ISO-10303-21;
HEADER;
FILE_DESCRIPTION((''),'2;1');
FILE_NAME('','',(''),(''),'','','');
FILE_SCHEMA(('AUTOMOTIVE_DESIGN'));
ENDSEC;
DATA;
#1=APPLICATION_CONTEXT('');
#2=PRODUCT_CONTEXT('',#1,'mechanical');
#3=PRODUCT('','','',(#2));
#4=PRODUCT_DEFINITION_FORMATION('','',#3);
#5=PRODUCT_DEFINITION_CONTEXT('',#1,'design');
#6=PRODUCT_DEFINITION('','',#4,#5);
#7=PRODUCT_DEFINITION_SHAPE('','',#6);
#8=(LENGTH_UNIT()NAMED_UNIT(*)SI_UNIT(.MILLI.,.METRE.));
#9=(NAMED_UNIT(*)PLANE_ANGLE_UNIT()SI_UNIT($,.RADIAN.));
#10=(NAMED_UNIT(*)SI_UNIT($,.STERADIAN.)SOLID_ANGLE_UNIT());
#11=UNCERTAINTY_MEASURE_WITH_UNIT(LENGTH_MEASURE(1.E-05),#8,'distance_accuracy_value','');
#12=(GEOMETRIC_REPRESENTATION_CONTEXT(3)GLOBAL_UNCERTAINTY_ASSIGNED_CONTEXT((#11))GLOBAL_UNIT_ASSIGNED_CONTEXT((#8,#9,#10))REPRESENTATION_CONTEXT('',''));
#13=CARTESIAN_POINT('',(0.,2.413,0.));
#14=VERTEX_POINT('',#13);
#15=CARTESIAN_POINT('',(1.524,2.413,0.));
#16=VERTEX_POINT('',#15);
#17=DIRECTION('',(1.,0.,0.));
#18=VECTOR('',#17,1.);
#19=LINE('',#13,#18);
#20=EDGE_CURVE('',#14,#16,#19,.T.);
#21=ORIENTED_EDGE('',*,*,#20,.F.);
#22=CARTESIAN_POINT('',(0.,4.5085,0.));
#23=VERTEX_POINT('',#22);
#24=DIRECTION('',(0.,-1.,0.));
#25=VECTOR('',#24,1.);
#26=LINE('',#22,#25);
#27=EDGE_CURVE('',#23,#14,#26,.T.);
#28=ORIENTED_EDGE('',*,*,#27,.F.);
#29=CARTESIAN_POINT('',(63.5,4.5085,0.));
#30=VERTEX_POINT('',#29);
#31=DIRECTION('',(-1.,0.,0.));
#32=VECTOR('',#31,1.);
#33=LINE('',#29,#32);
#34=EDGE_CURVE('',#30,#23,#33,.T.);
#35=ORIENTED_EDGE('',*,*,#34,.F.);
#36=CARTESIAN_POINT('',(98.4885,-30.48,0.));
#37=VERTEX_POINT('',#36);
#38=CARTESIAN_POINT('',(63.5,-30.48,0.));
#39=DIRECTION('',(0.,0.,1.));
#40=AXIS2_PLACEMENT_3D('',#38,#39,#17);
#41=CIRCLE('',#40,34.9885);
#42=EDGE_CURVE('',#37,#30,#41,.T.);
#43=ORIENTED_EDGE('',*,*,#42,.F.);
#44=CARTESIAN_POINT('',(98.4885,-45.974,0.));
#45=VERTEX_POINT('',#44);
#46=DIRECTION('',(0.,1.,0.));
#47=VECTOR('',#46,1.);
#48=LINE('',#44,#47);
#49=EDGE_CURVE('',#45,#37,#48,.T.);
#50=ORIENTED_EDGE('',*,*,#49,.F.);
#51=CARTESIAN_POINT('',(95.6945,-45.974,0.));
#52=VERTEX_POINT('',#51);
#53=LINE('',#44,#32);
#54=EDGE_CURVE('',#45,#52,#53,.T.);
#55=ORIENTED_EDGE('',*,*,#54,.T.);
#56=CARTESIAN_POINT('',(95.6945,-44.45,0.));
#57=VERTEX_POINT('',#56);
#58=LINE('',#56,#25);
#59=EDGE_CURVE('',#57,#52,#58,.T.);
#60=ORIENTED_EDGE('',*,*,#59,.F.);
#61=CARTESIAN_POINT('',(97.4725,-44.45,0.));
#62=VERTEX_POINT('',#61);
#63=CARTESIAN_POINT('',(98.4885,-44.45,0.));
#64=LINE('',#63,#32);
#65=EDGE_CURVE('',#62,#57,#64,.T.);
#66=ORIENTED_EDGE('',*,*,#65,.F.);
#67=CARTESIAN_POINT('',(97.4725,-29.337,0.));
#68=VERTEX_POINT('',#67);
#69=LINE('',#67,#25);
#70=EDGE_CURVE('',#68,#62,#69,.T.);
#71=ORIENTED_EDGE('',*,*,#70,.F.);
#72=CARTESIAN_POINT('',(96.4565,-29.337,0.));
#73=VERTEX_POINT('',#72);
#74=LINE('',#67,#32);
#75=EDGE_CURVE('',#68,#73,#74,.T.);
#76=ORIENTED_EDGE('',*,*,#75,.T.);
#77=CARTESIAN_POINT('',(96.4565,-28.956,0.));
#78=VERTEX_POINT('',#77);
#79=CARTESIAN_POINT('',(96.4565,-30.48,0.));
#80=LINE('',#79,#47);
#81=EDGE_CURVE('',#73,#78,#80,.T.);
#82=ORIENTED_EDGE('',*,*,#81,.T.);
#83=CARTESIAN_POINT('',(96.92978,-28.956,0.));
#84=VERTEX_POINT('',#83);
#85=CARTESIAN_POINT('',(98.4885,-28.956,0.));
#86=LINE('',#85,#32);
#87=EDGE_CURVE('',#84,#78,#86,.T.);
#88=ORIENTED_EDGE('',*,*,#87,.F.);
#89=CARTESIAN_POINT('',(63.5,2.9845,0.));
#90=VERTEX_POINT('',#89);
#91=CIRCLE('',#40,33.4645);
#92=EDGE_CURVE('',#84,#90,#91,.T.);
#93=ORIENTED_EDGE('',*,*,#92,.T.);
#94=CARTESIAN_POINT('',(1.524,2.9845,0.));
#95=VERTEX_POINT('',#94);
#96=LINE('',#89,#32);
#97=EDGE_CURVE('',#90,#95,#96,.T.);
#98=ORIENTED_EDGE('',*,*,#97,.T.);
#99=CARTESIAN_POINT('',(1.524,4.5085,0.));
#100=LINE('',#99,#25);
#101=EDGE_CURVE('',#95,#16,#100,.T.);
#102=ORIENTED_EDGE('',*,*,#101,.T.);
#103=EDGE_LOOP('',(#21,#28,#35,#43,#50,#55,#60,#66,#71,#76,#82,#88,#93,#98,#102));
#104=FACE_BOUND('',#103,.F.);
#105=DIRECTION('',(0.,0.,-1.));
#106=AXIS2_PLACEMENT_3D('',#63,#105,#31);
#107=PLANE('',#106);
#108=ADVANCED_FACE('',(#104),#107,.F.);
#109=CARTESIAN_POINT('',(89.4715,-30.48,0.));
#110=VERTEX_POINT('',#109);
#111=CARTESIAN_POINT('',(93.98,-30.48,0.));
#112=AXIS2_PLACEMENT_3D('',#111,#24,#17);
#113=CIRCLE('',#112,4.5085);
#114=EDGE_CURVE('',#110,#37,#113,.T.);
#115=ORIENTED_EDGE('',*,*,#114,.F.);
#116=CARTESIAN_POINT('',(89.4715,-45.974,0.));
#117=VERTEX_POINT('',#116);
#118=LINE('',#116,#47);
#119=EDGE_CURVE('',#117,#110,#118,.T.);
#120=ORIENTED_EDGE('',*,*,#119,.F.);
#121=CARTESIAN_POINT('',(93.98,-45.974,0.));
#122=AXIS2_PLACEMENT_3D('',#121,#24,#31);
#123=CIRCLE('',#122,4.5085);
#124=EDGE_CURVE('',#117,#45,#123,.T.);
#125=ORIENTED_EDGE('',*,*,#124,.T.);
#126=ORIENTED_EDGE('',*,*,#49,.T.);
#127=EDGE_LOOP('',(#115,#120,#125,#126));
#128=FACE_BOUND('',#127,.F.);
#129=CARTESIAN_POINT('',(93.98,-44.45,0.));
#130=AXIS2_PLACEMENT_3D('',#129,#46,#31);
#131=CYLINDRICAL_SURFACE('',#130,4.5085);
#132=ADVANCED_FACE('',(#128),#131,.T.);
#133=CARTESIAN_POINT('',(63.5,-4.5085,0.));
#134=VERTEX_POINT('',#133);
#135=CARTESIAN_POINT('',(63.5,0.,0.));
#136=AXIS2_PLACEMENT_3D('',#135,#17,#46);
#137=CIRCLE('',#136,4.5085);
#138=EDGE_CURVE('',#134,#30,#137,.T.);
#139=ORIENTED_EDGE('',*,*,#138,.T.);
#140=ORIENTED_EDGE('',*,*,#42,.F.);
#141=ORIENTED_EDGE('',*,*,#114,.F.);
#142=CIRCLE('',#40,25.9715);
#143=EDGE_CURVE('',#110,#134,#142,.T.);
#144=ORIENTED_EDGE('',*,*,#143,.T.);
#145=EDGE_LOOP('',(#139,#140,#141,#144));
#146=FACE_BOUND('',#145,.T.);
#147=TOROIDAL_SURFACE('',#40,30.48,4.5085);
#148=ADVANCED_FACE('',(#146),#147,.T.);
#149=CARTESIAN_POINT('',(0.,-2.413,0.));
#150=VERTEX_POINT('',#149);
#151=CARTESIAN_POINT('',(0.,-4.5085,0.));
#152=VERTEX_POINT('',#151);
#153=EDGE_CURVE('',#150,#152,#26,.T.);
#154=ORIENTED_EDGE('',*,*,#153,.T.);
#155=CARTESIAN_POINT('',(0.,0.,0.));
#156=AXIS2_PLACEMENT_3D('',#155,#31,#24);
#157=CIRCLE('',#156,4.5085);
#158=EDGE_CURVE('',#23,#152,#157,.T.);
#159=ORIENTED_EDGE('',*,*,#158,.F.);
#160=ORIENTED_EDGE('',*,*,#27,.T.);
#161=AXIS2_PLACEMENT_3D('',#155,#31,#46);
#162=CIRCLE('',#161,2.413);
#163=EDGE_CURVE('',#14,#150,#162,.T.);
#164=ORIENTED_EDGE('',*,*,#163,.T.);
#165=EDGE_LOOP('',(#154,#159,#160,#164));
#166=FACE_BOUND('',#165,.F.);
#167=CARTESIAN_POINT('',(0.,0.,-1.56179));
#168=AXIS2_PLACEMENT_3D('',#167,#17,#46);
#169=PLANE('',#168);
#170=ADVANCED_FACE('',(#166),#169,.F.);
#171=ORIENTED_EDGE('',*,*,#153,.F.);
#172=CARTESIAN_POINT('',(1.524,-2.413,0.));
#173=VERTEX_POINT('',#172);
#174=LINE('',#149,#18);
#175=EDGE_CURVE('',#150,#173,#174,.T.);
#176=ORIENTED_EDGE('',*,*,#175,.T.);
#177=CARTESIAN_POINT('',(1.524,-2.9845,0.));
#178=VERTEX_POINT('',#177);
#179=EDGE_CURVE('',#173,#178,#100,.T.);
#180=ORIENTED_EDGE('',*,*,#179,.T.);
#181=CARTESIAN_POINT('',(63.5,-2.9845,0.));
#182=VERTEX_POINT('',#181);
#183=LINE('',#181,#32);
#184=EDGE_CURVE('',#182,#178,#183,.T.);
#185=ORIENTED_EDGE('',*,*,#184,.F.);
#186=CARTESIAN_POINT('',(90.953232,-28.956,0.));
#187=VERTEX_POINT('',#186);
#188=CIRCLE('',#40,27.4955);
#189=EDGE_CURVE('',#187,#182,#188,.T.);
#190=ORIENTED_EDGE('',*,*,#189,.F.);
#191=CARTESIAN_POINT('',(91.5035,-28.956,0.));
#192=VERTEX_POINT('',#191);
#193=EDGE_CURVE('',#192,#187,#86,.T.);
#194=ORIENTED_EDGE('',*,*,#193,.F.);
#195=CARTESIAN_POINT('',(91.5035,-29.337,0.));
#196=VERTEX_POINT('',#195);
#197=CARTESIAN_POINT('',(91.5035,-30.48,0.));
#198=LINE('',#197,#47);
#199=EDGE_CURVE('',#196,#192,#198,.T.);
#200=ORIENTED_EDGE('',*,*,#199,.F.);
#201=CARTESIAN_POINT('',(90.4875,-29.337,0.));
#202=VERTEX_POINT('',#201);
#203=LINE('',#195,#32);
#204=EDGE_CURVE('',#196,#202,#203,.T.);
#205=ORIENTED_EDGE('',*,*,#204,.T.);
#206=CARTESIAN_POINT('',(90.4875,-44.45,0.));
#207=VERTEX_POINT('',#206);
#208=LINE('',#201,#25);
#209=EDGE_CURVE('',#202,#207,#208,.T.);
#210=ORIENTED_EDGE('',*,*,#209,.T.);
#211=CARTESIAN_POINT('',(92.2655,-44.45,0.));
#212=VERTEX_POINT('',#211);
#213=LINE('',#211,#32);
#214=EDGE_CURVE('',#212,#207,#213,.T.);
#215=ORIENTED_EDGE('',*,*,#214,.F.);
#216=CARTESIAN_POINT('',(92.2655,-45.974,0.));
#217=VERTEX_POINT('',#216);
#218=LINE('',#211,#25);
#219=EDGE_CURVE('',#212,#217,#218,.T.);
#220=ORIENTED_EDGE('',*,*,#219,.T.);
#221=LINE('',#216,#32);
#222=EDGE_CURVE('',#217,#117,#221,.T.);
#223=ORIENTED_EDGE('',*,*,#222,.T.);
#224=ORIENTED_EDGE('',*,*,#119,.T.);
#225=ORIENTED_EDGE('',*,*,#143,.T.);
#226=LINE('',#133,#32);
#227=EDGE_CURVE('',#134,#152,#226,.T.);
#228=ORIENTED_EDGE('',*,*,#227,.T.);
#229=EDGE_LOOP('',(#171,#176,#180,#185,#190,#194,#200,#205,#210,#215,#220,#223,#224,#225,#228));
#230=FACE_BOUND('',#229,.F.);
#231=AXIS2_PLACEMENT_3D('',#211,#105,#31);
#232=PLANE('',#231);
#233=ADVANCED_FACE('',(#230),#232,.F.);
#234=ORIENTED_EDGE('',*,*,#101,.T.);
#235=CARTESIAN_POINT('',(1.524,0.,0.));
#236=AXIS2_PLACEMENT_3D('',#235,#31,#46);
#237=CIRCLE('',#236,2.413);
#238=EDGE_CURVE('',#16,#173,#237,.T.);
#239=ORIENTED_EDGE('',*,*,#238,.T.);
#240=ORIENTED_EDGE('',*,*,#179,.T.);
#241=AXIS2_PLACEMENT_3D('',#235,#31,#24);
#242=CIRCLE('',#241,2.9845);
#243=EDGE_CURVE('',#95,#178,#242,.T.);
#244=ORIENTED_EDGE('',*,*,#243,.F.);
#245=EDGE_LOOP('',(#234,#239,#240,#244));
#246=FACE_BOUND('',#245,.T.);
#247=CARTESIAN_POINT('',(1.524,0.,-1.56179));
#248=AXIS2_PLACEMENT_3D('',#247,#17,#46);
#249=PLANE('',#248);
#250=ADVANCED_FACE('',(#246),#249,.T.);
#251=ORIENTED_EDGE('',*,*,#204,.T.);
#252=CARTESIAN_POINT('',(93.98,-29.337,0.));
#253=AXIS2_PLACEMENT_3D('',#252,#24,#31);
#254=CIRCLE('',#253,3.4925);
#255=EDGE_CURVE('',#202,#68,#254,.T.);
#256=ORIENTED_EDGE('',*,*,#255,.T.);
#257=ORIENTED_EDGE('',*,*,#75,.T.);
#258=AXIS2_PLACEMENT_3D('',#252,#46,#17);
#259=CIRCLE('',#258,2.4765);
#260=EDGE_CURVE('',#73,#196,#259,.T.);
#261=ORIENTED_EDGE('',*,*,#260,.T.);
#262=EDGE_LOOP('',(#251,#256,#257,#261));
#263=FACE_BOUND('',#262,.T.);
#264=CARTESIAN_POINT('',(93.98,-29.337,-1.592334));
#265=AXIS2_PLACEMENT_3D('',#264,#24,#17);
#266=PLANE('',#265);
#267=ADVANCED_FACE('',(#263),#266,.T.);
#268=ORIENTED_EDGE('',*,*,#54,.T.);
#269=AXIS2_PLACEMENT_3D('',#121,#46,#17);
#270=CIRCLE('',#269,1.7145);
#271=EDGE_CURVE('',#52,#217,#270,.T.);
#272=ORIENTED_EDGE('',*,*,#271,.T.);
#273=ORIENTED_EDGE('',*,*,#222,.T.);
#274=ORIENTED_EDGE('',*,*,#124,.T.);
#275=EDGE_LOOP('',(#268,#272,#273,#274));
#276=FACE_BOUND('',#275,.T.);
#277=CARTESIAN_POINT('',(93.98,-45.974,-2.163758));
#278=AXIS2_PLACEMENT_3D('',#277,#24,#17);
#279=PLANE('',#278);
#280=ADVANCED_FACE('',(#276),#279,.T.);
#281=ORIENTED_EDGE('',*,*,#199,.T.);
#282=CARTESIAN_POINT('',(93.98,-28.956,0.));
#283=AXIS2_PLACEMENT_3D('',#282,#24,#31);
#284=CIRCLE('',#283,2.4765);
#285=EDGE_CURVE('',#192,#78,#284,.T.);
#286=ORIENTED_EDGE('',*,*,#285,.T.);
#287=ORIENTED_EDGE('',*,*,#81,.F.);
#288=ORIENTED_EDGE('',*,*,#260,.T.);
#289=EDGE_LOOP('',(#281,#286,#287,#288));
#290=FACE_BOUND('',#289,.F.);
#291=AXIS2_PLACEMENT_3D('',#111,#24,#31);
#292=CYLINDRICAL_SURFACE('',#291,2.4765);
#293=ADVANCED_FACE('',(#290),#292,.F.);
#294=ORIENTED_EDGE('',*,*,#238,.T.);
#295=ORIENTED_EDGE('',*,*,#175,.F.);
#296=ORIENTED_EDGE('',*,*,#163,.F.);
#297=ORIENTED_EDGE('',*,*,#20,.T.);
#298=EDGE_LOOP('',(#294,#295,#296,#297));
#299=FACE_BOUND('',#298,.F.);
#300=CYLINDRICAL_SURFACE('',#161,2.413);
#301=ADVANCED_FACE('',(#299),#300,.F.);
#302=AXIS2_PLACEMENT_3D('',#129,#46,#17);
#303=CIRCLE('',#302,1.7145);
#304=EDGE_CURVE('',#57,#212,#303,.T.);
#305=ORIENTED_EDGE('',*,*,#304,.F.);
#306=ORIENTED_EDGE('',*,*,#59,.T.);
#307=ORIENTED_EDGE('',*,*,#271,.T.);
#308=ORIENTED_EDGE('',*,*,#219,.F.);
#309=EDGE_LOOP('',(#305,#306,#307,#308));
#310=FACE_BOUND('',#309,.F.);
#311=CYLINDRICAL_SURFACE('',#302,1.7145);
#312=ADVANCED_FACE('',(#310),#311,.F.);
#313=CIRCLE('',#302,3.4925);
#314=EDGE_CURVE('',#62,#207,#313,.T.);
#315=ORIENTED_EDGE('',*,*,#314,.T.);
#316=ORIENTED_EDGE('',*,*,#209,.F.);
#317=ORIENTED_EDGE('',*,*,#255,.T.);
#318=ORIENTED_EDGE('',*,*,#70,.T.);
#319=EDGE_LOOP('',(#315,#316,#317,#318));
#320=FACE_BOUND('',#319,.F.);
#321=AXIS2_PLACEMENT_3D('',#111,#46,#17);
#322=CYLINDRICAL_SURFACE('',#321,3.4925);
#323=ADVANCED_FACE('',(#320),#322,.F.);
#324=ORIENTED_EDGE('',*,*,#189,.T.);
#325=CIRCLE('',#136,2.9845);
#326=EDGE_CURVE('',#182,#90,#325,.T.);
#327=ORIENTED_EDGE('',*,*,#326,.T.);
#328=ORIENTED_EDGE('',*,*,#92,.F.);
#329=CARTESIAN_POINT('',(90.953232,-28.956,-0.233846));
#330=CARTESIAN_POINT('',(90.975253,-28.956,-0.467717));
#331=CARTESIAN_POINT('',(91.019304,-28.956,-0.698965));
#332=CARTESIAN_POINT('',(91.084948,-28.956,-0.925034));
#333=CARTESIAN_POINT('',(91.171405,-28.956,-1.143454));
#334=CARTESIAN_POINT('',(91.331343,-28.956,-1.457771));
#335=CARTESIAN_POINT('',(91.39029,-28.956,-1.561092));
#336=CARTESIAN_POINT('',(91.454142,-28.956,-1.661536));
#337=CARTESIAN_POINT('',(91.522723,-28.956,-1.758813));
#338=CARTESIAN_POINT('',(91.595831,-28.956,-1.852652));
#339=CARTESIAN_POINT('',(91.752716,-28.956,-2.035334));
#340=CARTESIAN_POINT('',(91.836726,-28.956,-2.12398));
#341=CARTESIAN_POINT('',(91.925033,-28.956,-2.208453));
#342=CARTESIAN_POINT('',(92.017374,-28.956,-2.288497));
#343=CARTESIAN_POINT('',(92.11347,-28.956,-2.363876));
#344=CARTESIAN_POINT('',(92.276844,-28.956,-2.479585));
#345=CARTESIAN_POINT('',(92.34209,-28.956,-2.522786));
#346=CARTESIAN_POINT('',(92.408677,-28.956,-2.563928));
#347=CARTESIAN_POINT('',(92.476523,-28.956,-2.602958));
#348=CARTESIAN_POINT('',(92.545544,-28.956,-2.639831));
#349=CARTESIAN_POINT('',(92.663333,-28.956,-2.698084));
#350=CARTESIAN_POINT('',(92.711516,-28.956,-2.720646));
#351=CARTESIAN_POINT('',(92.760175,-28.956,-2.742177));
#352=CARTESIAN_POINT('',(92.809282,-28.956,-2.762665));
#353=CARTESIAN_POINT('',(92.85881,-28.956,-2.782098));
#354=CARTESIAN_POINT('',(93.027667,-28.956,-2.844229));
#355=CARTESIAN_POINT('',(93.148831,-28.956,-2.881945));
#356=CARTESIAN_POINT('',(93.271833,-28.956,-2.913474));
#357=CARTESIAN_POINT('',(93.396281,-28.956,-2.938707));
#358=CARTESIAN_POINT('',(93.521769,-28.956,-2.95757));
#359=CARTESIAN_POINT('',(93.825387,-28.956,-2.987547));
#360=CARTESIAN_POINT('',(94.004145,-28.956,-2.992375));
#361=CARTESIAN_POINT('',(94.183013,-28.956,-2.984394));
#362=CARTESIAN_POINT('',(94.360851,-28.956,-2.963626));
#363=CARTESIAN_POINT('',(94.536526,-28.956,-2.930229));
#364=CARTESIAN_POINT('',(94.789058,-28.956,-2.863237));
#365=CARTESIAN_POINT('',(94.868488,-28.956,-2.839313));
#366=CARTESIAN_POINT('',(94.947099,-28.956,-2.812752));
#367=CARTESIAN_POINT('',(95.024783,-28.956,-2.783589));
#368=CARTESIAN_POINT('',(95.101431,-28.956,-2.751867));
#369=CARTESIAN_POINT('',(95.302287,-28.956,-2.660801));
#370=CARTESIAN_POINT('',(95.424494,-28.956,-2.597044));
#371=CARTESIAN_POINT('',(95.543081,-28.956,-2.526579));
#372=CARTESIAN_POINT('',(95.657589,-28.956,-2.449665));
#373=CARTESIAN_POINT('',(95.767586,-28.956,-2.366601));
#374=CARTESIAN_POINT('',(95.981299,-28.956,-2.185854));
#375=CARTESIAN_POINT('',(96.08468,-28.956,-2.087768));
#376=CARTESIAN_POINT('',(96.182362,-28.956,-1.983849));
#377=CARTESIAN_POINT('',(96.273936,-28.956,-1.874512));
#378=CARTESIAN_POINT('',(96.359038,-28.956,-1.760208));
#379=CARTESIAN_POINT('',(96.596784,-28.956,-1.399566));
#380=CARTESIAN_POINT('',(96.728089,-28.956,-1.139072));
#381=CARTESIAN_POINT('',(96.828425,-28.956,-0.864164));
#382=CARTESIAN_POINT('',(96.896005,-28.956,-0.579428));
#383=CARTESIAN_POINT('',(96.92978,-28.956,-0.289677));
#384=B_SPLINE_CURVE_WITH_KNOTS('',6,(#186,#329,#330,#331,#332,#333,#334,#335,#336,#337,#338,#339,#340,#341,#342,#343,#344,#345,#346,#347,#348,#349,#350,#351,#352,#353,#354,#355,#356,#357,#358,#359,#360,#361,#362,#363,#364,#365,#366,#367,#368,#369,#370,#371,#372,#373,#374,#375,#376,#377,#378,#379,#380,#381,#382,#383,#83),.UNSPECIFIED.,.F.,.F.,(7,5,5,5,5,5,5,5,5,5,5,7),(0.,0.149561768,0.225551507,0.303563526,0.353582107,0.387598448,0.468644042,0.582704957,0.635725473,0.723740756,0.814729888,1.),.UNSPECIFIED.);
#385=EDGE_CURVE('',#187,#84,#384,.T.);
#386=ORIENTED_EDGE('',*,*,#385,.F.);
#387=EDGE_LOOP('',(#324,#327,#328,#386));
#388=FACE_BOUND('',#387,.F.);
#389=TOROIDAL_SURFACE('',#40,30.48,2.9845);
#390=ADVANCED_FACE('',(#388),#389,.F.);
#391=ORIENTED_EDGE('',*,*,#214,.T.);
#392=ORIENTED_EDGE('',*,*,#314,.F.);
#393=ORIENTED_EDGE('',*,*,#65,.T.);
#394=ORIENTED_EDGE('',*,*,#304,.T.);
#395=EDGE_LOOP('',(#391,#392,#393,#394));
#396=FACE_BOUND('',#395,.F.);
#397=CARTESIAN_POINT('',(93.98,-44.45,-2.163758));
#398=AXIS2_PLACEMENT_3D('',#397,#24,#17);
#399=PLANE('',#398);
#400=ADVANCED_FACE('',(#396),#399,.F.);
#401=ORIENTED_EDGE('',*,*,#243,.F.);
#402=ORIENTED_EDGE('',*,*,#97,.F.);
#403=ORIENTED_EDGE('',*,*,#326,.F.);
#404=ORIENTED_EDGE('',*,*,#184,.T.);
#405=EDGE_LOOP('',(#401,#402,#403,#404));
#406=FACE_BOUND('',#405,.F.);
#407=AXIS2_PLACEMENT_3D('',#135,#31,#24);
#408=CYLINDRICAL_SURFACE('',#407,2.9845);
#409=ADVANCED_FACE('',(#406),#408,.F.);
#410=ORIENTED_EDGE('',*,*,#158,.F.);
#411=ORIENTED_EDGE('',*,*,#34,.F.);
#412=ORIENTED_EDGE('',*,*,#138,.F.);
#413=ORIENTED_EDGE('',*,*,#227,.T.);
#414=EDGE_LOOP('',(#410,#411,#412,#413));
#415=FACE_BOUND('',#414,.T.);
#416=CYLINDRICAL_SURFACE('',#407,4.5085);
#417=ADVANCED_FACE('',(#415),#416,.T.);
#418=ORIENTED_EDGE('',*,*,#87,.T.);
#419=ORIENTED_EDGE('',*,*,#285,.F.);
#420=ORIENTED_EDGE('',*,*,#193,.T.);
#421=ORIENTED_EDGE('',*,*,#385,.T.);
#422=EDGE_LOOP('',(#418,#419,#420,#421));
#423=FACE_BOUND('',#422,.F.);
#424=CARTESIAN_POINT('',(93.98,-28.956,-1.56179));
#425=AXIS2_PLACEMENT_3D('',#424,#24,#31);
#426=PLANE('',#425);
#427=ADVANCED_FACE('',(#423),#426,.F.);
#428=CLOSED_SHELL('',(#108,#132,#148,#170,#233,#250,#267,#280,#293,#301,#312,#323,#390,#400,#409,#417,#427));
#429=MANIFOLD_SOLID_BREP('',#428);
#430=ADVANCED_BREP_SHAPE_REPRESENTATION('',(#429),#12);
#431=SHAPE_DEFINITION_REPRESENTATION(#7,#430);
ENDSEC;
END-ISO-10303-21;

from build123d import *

# Parameters (mm, degrees)
F4_T      = -1.524
F6_DEPTH  = 1.524
F7_DEPTH  = 1.143
F9_DEPTH  = 1.524
F10_DEPTH = 13.97
F12_DEPTH = 1.524


with BuildPart() as f3:
    # F3: sweep along a path in F0
    with BuildLine(Plane.XY) as f3_path:
        ThreePointArc((93.98, -30.48), (85.0526146906, -8.9273853094), (63.5, 0))
        Line((63.5, 0), (0, 0))
    # F2 (on plane+point) → F3 (sweep)
    with BuildSketch(Plane.XZ.offset(30.48)):
        with BuildLine():
            Line((98.4885, 0), (89.4715, 0))
            ThreePointArc((89.4715, 0), (93.98, -4.5085), (98.4885, 0))
        make_face()
    sweep(path=f3_path.line)

    # F4
    f4_openings = [f3.faces().sort_by_distance(p)[0] for p in [
        (87.501546, -6.478454, 0),
    ]]
    offset(amount=F4_T, openings=f4_openings)

    # F5 (on face) → F6 (cut, through all)
    with BuildSketch(Plane.XZ.offset(30.48)):
        with BuildLine():
            ThreePointArc((91.5035, 0), (93.98, -2.4765), (96.4565, 0))
            Line((96.4565, 0), (91.5035, 0))
        make_face()
    extrude(amount=-F6_DEPTH, mode=Mode.SUBTRACT)

    # F5 (on face) → F7 (cut)
    with BuildSketch(Plane.XZ.offset(30.48)):
        with BuildLine():
            Line((97.4725, 0), (96.4565, 0))
            ThreePointArc((96.4565, 0), (93.98, -2.4765), (91.5035, 0))
            Line((91.5035, 0), (90.4875, 0))
            ThreePointArc((90.4875, 0), (93.98, -3.4925), (97.4725, 0))
        make_face()
    extrude(amount=-F7_DEPTH, mode=Mode.SUBTRACT)

    # F8 (on face) → F9 (cut, through all)
    with BuildSketch(Plane(origin=(0, 0, 0), x_dir=(0, -1, 0), z_dir=(-1, 0, 0))):
        with BuildLine():
            ThreePointArc((-2.413, 0), (0, -2.413), (2.413, 0))
            Line((2.413, 0), (-2.413, 0))
        make_face()
    extrude(amount=-F9_DEPTH, mode=Mode.SUBTRACT)

    # F5 (on face) → F10 (join)
    with BuildSketch(Plane.XZ.offset(30.48)):
        with BuildLine():
            Line((98.4885, 0), (97.4725, 0))
            ThreePointArc((97.4725, 0), (93.98, -3.4925), (90.4875, 0))
            Line((90.4875, 0), (89.4715, 0))
            ThreePointArc((89.4715, 0), (93.98, -4.5085), (98.4885, 0))
        make_face()
    extrude(amount=F10_DEPTH)

    # F11 (on face) → F12 (join)
    with BuildSketch(Plane.XZ.offset(44.45)):
        with BuildLine():
            Line((98.4885, 0), (97.4725, 0))
            ThreePointArc((97.4725, 0), (93.98, -3.4925), (90.4875, 0))
            Line((90.4875, 0), (89.4715, 0))
            ThreePointArc((89.4715, 0), (93.98, -4.5085), (98.4885, 0))
        make_face()
        with BuildLine():
            ThreePointArc((90.4875, 0), (93.98, -3.4925), (97.4725, 0))
            Line((97.4725, 0), (95.6945, 0))
            ThreePointArc((95.6945, 0), (93.98, -1.7145), (92.2655, 0))
            Line((92.2655, 0), (90.4875, 0))
        make_face()
    extrude(amount=F12_DEPTH)


solid = f3.part
